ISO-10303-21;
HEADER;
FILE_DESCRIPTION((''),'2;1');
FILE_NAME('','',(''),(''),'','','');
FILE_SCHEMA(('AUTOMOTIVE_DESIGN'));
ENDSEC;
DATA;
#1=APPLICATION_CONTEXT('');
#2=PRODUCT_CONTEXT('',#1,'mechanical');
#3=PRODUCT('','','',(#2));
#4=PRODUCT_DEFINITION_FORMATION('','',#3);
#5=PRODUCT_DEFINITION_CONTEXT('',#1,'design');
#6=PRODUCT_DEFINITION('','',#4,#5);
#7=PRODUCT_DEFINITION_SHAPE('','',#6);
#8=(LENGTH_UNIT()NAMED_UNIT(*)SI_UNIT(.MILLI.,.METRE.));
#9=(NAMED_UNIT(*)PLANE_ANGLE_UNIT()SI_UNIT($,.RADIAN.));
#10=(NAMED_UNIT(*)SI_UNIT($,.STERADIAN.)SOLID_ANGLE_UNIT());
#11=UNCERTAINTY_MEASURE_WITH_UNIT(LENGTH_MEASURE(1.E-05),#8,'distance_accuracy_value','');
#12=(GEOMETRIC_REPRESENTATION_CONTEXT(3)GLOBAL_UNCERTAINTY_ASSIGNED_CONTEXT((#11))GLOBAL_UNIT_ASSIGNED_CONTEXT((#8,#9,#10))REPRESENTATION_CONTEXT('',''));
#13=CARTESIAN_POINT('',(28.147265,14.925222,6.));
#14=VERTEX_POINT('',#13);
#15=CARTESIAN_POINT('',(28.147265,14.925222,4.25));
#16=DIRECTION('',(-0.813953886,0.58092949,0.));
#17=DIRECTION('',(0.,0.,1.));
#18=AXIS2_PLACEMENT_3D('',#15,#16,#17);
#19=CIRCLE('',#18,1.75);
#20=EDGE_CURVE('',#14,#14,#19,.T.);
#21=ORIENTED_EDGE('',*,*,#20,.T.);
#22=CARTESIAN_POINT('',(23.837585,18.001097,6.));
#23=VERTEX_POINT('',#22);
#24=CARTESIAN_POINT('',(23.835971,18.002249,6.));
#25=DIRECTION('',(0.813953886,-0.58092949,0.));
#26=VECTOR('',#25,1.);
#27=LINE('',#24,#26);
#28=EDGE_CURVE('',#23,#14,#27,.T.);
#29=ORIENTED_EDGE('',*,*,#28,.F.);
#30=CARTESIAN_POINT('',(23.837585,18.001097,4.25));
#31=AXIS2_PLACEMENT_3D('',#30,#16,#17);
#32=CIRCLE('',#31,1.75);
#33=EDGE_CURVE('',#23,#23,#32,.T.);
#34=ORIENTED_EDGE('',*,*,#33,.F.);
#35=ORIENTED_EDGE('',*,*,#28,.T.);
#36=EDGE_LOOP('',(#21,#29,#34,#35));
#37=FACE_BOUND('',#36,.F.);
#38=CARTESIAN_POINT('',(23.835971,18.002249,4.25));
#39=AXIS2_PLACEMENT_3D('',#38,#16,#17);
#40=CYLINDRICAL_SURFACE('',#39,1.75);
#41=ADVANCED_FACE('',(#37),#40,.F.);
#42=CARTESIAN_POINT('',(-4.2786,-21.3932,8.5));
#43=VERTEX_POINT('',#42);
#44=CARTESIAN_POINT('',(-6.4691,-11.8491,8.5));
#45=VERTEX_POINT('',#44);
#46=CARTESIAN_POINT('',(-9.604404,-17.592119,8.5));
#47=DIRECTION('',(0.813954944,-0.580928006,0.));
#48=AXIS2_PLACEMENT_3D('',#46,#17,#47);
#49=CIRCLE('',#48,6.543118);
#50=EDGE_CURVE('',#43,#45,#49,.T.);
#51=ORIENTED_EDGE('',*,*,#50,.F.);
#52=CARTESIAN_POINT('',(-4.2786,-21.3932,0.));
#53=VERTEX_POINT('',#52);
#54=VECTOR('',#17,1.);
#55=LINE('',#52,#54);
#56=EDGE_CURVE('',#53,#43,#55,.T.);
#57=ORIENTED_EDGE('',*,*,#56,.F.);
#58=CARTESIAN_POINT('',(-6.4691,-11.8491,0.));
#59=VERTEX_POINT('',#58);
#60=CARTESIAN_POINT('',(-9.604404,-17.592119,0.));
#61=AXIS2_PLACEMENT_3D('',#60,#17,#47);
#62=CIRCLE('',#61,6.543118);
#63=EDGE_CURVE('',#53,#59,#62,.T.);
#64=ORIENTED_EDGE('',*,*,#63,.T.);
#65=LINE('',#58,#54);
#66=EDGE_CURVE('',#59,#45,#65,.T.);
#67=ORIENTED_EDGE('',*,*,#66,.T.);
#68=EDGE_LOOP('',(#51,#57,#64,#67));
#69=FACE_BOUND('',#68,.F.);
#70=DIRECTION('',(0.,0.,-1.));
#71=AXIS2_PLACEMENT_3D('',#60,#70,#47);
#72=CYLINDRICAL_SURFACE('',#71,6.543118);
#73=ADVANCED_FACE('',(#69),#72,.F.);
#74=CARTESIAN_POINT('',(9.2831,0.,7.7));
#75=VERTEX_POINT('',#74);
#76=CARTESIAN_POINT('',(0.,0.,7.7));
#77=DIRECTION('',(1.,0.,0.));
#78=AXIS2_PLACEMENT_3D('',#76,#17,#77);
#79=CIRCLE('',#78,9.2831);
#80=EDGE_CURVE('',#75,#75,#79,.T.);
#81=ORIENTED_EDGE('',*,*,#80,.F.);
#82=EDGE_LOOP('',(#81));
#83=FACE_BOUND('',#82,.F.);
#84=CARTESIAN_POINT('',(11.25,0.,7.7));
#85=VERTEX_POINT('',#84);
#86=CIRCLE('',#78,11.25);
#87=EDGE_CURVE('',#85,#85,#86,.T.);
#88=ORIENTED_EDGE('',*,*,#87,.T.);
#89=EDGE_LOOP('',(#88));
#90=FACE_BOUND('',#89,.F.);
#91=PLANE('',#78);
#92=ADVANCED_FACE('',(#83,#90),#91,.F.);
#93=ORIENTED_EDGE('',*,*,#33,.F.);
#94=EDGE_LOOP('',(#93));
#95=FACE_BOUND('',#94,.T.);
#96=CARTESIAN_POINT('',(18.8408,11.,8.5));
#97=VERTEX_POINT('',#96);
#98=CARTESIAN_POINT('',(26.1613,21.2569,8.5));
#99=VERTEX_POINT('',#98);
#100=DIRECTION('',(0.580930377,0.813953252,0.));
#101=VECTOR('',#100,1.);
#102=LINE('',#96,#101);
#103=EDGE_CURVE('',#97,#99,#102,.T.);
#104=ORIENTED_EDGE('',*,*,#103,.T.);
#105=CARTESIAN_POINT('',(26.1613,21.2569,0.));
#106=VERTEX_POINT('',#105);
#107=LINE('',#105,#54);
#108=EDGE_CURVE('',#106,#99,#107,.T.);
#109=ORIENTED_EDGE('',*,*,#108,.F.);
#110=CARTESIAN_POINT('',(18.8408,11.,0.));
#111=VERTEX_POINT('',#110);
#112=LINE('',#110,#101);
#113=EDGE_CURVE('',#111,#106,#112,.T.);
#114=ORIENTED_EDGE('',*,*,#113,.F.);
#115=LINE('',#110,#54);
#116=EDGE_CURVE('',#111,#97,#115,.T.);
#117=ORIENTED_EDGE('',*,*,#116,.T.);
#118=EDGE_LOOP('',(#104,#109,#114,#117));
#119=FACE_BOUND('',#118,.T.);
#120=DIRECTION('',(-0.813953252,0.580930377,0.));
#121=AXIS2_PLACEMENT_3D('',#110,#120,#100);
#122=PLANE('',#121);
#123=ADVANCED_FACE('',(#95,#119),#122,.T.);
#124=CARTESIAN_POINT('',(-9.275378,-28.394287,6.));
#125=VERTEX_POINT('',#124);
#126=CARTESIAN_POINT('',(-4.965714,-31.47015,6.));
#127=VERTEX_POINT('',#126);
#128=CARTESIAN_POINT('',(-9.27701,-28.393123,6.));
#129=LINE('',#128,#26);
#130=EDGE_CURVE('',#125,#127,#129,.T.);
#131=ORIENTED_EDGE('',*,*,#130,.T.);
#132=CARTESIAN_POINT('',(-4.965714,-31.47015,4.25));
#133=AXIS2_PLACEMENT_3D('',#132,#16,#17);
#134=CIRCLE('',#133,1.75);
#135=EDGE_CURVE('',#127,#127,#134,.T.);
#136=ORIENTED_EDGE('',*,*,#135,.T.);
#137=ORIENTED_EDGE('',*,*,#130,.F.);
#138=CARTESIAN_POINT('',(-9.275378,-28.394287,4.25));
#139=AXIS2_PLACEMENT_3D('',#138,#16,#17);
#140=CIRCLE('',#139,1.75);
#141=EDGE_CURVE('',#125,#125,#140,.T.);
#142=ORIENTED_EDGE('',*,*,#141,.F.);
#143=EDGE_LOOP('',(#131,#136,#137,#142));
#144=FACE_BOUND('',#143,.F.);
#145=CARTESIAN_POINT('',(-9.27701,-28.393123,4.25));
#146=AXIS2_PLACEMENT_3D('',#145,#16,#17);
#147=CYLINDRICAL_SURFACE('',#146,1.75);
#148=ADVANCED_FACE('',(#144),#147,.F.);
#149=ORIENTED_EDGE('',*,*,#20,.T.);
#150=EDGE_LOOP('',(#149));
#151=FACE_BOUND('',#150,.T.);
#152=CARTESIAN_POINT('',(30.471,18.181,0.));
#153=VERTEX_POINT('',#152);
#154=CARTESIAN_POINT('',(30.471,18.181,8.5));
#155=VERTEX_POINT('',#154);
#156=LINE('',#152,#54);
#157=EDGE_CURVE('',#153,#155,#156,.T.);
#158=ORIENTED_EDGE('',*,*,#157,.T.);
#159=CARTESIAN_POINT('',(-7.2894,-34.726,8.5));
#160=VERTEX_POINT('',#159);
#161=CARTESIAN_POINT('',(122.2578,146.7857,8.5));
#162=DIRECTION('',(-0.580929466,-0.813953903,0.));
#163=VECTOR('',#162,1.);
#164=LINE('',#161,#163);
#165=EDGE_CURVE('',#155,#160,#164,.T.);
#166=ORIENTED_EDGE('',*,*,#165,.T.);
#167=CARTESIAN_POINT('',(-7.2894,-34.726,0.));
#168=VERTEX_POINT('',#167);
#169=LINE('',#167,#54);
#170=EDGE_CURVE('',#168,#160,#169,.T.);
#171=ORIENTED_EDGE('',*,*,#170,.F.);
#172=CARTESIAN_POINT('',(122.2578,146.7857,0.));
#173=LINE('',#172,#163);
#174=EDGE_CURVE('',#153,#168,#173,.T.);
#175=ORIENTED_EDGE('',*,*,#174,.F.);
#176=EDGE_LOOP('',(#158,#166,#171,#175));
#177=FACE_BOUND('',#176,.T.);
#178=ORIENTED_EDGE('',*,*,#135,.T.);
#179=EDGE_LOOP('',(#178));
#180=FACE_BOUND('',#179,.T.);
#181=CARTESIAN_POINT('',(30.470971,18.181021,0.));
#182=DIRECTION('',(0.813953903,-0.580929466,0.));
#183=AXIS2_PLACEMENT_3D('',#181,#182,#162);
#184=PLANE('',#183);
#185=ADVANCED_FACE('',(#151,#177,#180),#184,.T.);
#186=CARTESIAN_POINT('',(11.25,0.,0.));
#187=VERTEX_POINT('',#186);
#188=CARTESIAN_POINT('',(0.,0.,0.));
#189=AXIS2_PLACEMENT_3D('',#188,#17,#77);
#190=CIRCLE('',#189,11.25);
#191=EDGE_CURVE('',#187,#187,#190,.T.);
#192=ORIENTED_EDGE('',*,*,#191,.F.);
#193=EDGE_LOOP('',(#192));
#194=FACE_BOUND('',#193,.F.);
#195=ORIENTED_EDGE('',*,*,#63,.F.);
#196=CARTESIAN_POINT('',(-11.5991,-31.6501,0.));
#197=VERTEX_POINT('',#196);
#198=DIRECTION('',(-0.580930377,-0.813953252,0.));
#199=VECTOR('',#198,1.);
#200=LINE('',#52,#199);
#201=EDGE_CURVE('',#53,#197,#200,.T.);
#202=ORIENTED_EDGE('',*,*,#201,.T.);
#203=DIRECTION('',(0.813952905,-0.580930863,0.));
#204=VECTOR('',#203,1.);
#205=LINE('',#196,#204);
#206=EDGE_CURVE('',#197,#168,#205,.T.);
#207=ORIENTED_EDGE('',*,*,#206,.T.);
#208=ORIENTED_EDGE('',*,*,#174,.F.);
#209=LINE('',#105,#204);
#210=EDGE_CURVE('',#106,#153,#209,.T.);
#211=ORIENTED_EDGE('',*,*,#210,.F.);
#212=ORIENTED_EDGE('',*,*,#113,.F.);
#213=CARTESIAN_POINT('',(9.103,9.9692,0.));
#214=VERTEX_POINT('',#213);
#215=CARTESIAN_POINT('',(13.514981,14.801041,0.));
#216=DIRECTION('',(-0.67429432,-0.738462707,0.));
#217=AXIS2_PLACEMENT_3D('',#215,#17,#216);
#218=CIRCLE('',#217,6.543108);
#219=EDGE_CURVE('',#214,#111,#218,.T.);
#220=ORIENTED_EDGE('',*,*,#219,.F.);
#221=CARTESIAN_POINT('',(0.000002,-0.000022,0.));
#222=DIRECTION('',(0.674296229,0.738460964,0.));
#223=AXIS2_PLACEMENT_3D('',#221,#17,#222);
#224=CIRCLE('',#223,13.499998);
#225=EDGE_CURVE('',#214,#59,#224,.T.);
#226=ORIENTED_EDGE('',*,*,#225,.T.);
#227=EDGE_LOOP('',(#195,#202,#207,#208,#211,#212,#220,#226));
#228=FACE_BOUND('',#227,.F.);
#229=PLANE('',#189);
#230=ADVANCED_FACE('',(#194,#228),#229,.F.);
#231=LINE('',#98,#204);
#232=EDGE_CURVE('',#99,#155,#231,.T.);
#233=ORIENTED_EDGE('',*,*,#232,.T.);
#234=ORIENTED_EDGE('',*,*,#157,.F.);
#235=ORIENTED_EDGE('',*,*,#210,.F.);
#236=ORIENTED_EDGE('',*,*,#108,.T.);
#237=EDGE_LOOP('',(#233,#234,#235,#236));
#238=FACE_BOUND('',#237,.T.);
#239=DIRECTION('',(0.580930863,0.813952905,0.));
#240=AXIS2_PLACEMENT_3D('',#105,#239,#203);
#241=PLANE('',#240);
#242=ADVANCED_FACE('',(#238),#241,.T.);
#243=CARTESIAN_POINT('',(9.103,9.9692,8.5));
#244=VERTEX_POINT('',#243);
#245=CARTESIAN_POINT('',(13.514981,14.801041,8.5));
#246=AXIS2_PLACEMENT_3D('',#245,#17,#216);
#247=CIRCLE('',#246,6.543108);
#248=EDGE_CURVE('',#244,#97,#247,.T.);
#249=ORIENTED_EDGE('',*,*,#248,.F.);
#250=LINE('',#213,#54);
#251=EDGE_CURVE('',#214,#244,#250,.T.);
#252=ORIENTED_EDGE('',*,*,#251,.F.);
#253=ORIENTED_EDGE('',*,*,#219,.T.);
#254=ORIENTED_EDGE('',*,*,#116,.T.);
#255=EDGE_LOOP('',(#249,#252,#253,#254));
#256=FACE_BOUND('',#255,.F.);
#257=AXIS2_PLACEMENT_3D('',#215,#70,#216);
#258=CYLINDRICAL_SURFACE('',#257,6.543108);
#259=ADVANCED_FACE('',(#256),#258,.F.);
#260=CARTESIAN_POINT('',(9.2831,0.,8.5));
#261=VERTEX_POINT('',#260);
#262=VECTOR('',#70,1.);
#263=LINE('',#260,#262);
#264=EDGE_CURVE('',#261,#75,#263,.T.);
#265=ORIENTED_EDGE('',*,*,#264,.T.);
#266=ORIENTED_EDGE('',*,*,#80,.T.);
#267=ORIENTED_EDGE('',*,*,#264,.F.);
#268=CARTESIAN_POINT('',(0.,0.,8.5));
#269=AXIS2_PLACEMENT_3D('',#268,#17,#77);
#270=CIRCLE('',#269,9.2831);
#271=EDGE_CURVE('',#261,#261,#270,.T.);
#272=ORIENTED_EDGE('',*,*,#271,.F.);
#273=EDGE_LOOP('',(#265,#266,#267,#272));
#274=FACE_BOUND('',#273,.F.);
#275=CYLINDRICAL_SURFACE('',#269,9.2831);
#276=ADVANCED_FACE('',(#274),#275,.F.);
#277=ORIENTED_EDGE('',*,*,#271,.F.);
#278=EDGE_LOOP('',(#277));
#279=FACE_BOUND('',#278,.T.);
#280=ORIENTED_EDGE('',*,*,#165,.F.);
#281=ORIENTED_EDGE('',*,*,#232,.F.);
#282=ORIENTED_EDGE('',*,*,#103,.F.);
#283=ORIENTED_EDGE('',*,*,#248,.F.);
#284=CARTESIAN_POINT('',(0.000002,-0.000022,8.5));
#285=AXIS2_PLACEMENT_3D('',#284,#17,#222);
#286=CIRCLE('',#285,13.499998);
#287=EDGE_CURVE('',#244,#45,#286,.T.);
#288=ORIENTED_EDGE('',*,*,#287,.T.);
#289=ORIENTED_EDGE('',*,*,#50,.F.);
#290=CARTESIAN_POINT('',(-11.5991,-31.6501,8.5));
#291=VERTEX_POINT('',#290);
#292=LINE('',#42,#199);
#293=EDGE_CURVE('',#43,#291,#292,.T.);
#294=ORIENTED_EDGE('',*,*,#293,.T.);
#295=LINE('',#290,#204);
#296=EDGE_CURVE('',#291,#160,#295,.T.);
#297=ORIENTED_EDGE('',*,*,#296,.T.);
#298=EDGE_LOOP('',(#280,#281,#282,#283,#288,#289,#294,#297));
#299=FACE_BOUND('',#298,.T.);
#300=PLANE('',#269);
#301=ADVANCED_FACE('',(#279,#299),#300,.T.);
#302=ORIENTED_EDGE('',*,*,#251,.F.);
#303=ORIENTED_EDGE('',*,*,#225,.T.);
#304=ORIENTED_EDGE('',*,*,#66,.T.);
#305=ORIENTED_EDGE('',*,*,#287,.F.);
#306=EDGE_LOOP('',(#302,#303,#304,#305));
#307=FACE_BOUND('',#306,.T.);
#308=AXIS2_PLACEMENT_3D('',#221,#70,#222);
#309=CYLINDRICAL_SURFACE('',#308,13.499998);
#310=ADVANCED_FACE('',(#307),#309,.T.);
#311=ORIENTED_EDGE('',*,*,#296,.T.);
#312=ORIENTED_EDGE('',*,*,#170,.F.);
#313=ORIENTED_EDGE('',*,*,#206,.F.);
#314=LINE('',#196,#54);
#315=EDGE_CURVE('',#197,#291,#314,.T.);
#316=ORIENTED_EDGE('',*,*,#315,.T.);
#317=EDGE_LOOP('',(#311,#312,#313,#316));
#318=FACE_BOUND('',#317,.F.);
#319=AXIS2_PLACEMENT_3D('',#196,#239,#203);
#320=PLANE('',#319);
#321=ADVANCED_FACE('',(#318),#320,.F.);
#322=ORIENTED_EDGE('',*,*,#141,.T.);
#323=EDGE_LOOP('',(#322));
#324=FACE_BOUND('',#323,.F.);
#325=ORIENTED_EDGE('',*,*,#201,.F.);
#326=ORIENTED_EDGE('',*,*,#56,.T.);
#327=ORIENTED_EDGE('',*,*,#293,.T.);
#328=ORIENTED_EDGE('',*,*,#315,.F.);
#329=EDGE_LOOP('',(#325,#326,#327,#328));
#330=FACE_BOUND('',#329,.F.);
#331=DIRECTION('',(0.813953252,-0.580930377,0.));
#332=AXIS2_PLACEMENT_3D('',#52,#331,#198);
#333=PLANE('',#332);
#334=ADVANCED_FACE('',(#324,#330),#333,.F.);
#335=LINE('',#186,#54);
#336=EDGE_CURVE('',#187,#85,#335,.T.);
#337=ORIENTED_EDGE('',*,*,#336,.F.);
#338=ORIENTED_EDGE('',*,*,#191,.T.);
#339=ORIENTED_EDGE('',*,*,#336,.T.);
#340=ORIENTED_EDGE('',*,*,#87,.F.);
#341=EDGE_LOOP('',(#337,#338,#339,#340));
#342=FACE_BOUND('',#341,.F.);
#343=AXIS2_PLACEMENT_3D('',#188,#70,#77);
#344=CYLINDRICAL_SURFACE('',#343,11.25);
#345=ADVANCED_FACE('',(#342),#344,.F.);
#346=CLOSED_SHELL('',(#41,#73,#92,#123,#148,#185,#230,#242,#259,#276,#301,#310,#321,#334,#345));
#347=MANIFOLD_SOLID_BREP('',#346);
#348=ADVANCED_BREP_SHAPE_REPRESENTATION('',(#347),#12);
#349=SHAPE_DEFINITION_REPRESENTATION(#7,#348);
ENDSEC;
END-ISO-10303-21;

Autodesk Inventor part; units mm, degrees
ref_plane "YZ Plane" through (0, 0, 0) normal (1, 0, 0) x (0, 1, 0)
ref_plane "XZ Plane" through (0, 0, 0) normal (0, 1, 0) x (-1, 0, 0)
ref_plane "XY Plane" through (0, 0, 0) normal (0, 0, 1) x (1, 0, 0)
sketch "Sketch1" plane through (0, 0, 0) normal (0, 0, 1) x (1, 0, 0)
  circle A0 centre (0, 0) radius 11 projected
  arc A1 (9.103, 9.9692) -> (-6.4691, -11.8491) centre (0, 0) ccw
  line L0 (122.2578, 146.7857) -> (-99.0763, -163.3307) projected
  arc A2 (9.103, 9.9692) -> (18.8408, 11) centre (13.515, 14.8011) ccw
  line L1 (18.8408, 11) -> (26.1613, 21.2569)
  line L2 (26.1613, 21.2569) -> (30.471, 18.181)
  line L3 (0, 0) -> (9.5455, -6.8127)
  line L4 (-7.2894, -34.726) -> (30.471, 18.181)
  arc A3 (-4.2786, -21.3932) -> (-6.4691, -11.8491) centre (-9.6045, -17.5921) ccw
  line L5 (-4.2786, -21.3932) -> (-11.5991, -31.6501)
  line L6 (-11.5991, -31.6501) -> (-7.2894, -34.726)
  line L7 (-7.2894, -34.726) -> (30.471, 18.181)
  circle A4 centre (0, 0) radius 11.25
  point P0 (0, 0)
  point P1 (-99.0763, -163.3307)
  point P2 (122.2578, 146.7857)
  dimension "d0" = 2.5
  dimension "d12" = 65
  dimension "d15" = 22.5
extrude "Extrusion1" add sketch "Sketch1" along normal blind 8.5 contours A2 L1 L2 L0 L6 L5 A3 A1
sketch "Sketch2" plane through (0, 0, 8.5) normal (0, 0, 1) x (1, 0, 0)
  circle A0 centre (0, 0) radius 9.2831
  circle A1 centre (0, 0) radius 10.96 projected
  circle A2 centre (0, 0) radius 13.5
  dimension "d3" = 18.5661
extrude "Extrusion2" add sketch "Sketch2" against normal blind 0.8 contours A1 | A2
sketch "Sketch3" plane through (-11.5991, -31.6501, 0) normal (-0.8139539, 0.5809295, 0) x (0, 0, 1)
  line L0 (0, 12.6013) -> (0, 0) projected
  line L1 (0, 0) -> (8.5, 0) projected
  line L2 (8.5, 12.6013) -> (8.5, 0) projected
  line L3 (0, 12.6013) -> (8.5, 12.6013) projected
  line L4 (0, 65) -> (0, 52.3987) projected
  line L5 (0, 52.3987) -> (8.5, 52.3987) projected
  line L6 (8.5, 65) -> (8.5, 52.3987) projected
  line L7 (0, 65) -> (8.5, 65) projected
  line L8 (3.4344, 32.2582) -> (4.7482, 32.2582)
  circle A0 centre (4.25, 4) radius 1.75
  circle A1 centre (4.25, 61) radius 1.75
  point P0 (0, 32.5)
  dimension "d10" = 3.5
  dimension "d11" = 3.5
  dimension "d13" = 4
  dimension "d14" = 4
extrude "Extrusion3" cut sketch "Sketch3" against normal up to surface (5.2948 mm away) contours A0 | A1
properties part number "bearing block"
